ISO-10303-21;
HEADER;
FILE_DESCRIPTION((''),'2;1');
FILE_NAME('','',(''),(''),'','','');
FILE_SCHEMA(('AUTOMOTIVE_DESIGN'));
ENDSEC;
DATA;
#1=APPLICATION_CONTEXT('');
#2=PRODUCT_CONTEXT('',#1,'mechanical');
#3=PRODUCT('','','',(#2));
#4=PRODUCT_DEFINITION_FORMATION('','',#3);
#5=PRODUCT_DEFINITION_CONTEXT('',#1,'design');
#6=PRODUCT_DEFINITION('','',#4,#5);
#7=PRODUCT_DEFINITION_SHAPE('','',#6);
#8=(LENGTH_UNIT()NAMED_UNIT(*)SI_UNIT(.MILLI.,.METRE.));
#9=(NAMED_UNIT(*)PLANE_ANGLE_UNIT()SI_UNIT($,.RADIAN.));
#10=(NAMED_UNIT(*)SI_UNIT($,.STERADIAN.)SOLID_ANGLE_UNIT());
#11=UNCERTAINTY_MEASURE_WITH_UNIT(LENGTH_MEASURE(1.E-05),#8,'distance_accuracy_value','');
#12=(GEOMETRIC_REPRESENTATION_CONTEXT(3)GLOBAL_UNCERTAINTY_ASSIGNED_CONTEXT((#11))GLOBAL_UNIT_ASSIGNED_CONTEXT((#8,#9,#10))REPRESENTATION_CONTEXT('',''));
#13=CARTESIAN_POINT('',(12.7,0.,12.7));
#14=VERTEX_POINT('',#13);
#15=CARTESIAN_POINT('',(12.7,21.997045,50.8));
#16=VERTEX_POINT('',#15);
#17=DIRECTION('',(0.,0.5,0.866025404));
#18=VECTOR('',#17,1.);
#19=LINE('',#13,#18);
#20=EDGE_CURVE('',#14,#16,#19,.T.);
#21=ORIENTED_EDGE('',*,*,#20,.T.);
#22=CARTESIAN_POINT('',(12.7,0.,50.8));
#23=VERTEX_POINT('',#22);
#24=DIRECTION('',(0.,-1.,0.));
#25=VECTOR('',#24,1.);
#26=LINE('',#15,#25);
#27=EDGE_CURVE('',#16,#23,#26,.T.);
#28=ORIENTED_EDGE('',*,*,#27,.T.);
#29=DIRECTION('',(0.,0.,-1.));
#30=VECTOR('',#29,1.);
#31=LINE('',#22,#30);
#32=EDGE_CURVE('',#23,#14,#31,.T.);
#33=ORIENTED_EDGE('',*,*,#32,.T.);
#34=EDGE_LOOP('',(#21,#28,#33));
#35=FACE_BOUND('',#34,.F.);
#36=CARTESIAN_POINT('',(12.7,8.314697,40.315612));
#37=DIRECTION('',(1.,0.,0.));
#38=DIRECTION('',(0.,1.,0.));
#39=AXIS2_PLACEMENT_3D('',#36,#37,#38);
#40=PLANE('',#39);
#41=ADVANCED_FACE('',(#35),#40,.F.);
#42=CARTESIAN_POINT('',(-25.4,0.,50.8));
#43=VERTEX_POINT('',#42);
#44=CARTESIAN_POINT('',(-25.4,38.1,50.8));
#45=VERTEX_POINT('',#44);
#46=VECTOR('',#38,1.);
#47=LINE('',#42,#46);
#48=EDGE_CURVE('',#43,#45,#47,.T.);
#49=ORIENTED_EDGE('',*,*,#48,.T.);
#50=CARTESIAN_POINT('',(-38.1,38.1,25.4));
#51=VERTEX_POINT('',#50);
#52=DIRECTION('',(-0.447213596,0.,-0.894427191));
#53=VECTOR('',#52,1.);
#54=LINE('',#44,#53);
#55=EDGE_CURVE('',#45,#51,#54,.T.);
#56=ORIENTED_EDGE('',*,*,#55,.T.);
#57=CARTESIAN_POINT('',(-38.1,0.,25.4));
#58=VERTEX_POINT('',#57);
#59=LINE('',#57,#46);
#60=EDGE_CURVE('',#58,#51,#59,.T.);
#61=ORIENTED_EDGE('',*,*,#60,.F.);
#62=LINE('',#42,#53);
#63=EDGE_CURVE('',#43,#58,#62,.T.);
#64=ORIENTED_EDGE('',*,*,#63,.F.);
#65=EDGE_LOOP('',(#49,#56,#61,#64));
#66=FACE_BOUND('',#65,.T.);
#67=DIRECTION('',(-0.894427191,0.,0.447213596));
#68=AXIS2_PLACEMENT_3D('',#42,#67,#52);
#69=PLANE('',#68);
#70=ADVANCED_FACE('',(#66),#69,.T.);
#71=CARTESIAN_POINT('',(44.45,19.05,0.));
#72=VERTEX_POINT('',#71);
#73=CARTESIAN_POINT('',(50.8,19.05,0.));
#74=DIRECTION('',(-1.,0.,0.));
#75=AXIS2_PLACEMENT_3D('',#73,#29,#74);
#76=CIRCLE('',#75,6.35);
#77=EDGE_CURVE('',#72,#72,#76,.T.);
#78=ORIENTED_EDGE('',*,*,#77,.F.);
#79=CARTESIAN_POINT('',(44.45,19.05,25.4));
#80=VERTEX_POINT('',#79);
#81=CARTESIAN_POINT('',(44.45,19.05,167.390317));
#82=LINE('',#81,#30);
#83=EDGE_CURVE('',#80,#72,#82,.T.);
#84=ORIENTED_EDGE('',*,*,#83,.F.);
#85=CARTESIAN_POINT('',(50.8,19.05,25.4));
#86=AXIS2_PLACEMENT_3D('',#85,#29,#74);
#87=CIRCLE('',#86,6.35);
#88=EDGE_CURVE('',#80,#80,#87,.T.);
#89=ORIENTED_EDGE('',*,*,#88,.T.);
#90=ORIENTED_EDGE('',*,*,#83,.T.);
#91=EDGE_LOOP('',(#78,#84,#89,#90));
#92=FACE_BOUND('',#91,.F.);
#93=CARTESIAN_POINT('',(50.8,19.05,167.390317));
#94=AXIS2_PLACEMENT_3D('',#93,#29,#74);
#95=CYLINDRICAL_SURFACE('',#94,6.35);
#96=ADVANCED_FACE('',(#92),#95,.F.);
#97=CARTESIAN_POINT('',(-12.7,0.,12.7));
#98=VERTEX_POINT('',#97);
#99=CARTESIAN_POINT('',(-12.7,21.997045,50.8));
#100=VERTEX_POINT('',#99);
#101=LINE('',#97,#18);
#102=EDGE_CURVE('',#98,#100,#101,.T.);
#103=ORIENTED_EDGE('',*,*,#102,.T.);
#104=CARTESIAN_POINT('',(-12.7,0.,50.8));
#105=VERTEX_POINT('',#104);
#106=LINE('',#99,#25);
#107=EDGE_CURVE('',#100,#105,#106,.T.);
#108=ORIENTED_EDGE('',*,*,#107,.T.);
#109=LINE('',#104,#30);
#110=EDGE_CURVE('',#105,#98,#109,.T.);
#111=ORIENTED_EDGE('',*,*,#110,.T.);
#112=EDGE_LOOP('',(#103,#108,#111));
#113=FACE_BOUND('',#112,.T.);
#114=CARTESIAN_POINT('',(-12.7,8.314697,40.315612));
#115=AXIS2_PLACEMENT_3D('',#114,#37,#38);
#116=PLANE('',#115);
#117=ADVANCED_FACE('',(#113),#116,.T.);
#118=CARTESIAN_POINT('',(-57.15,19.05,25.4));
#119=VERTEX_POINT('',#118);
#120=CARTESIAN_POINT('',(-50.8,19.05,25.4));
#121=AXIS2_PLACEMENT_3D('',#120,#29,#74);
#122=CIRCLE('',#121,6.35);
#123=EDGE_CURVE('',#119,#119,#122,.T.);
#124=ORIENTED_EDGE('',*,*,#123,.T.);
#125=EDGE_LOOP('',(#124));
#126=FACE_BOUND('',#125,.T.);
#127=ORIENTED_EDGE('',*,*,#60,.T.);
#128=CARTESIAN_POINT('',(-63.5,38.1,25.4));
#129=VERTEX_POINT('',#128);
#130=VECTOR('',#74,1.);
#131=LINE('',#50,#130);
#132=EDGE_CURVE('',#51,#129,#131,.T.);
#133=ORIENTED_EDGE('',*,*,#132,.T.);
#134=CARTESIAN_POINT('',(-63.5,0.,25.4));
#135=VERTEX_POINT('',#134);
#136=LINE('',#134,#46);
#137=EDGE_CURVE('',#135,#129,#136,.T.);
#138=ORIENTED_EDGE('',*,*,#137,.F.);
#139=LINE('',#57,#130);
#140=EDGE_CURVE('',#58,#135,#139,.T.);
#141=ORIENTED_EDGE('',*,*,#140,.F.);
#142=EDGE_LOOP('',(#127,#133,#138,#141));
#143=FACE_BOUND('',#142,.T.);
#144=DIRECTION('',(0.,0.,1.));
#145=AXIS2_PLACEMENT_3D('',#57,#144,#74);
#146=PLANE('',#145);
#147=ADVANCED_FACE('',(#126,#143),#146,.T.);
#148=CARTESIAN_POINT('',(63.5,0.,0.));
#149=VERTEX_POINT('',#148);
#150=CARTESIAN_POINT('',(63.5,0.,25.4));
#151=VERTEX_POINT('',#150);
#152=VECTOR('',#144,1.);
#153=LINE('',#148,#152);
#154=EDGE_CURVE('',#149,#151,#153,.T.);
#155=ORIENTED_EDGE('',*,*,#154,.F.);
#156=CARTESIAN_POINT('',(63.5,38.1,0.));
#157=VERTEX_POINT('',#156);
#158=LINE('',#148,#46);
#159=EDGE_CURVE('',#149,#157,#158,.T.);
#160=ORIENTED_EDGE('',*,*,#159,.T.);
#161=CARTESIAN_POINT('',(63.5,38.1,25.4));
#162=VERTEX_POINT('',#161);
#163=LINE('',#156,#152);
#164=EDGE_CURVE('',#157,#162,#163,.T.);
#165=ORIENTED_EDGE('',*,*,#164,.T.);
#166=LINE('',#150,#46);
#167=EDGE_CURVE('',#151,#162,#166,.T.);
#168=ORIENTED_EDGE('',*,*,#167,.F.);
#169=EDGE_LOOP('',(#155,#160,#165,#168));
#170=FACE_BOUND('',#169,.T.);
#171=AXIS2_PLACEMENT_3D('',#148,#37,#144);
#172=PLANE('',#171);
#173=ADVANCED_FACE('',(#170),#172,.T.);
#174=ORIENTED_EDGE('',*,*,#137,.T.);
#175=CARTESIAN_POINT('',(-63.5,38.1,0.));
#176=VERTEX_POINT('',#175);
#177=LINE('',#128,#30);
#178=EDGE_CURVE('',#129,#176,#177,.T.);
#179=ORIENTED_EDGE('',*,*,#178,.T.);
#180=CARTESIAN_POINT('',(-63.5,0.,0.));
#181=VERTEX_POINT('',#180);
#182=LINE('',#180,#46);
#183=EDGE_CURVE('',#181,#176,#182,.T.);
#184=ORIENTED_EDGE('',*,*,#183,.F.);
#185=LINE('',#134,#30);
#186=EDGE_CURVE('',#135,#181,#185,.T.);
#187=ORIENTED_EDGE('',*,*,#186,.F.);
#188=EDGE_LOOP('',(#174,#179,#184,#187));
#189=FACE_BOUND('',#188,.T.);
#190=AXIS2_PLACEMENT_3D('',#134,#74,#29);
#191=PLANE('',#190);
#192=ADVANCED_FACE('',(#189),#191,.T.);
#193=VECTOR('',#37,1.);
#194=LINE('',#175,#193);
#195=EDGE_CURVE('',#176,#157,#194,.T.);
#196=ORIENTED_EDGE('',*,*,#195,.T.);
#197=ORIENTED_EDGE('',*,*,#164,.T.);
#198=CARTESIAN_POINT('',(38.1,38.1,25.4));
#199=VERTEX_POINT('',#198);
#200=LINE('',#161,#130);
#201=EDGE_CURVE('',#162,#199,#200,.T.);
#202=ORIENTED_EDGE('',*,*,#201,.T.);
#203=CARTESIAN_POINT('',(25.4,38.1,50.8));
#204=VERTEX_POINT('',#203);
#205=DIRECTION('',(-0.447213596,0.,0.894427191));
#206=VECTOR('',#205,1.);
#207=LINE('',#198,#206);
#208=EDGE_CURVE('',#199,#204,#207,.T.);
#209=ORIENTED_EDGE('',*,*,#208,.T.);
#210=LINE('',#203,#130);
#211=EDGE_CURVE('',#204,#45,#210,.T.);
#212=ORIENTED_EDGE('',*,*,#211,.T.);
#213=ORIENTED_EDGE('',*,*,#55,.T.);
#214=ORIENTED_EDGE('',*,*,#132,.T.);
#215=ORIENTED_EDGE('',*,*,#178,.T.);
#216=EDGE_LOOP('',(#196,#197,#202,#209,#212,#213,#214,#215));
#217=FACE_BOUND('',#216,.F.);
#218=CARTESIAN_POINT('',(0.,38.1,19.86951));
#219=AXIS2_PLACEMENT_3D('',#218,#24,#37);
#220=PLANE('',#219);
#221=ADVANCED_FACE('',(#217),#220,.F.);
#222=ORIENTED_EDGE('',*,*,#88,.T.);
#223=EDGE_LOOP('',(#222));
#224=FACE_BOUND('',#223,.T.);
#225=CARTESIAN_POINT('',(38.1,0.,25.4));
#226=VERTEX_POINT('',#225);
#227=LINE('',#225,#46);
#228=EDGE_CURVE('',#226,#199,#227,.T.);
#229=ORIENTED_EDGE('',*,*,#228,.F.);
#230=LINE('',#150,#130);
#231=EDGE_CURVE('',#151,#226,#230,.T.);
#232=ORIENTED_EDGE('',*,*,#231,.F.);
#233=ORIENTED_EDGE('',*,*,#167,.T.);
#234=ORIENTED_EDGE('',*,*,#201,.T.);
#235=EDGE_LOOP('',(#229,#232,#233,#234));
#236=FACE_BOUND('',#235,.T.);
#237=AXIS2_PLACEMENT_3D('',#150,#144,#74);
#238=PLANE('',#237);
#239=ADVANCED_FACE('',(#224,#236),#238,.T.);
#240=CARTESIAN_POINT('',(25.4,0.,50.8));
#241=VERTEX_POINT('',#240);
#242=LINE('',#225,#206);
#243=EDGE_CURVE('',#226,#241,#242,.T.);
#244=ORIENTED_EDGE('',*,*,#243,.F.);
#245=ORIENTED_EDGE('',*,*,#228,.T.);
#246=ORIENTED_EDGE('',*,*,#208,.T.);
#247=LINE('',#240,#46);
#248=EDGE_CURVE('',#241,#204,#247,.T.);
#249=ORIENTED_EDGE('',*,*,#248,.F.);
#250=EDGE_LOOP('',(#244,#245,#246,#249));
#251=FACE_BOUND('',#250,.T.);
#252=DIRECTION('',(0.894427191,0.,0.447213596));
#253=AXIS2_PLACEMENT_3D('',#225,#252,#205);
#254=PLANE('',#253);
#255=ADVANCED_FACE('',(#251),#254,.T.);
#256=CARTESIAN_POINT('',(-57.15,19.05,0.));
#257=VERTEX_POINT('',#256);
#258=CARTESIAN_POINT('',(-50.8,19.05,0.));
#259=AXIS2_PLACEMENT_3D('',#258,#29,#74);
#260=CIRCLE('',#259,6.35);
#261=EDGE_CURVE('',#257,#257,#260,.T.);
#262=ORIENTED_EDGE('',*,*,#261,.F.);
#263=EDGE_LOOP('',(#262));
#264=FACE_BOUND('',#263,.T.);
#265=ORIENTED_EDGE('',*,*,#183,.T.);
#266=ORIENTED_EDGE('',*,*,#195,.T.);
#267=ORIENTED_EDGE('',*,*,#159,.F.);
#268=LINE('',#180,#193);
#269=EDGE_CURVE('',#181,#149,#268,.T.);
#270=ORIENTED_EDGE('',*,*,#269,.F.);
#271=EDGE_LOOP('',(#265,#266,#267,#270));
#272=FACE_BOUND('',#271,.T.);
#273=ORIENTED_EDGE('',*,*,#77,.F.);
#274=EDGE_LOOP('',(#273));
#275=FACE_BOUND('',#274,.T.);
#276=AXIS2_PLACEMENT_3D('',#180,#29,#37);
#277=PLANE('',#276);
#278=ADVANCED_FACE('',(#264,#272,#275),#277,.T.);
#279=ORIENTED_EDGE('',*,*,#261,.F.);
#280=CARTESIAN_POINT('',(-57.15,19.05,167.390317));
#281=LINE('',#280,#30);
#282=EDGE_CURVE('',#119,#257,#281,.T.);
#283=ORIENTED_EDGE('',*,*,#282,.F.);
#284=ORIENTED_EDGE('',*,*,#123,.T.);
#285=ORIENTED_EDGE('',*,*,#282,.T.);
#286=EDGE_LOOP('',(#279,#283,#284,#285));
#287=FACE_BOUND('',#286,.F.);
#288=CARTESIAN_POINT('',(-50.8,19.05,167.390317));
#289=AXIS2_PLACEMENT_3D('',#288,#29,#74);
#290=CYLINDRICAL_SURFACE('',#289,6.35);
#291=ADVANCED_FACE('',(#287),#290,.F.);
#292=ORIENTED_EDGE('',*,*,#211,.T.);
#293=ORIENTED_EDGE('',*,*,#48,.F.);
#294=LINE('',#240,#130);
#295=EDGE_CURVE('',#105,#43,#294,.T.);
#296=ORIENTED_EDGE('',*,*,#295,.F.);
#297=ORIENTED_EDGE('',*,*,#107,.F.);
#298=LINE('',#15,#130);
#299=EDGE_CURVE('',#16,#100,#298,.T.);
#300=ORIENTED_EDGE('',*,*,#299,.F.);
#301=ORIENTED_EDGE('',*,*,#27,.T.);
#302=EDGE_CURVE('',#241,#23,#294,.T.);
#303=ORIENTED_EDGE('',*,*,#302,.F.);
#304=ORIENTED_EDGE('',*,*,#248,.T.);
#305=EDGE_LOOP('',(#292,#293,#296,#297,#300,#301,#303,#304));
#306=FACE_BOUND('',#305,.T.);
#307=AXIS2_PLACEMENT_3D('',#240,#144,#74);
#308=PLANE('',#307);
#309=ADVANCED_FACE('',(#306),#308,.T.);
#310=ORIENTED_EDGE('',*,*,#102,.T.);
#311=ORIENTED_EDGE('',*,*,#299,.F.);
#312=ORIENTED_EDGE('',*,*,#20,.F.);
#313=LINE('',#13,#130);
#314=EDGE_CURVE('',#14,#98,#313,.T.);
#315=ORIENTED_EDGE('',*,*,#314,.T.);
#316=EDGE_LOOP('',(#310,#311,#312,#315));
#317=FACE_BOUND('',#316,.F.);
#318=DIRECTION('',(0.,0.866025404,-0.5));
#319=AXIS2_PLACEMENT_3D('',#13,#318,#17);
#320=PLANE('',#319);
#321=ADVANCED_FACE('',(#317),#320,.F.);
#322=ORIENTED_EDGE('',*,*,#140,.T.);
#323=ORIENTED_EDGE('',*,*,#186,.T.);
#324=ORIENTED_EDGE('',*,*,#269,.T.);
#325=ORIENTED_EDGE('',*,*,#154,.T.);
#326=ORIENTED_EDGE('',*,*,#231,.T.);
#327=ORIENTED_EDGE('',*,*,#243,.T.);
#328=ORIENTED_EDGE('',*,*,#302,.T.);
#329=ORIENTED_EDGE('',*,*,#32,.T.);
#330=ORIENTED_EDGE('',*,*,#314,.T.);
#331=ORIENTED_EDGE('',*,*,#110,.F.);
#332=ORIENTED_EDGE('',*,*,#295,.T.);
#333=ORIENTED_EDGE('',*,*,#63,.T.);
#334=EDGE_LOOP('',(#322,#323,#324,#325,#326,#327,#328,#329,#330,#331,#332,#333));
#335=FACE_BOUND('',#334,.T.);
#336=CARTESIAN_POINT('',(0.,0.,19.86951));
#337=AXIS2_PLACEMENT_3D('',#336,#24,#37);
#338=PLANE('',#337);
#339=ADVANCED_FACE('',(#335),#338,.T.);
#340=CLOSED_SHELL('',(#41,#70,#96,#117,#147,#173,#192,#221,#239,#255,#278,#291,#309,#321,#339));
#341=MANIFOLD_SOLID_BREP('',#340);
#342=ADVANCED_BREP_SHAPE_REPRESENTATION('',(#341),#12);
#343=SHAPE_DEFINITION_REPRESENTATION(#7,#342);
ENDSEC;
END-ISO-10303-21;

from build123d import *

# Parameters (mm, degrees)
F1_DEPTH = 38.1
F3_D     = 12.7
F5_START = -50.8
F5_DEPTH = 25.4


# Not quite as in the source:
# - a length typed as a fraction of an inch, garbled in the dataset ("3 / 203.2 mm" for 3/8 in), is restored


with BuildPart() as f1:
    # F0 (on Front) → F1 (new body)
    with BuildSketch(Plane.XZ):
        Polygon((-63.5, 0), (63.5, 0), (63.5, 25.4), (38.1, 25.4), (25.4, 50.8), (-25.4, 50.8), (-38.1, 25.4), (-63.5, 25.4), align=None)
    extrude(amount=-F1_DEPTH)

    # F3 (through all)
    with Locations(Plane.XY.offset(25.4)):
        with Locations((-50.8, 19.05), (50.8, 19.05)):
            Hole(F3_D / 2)

    # F4 (on face) → F5 (cut)
    with BuildSketch(Plane.YZ.offset(63.5).offset(F5_START)):
        Polygon((0, 25.4), (7.3323484187, 25.4), (21.9970452561, 50.8), (0, 50.8), align=None)
        Polygon((0, 25.4), (0, 12.7), (7.3323484187, 25.4), align=None)
    extrude(amount=-F5_DEPTH, mode=Mode.SUBTRACT)


solid = f1.part
